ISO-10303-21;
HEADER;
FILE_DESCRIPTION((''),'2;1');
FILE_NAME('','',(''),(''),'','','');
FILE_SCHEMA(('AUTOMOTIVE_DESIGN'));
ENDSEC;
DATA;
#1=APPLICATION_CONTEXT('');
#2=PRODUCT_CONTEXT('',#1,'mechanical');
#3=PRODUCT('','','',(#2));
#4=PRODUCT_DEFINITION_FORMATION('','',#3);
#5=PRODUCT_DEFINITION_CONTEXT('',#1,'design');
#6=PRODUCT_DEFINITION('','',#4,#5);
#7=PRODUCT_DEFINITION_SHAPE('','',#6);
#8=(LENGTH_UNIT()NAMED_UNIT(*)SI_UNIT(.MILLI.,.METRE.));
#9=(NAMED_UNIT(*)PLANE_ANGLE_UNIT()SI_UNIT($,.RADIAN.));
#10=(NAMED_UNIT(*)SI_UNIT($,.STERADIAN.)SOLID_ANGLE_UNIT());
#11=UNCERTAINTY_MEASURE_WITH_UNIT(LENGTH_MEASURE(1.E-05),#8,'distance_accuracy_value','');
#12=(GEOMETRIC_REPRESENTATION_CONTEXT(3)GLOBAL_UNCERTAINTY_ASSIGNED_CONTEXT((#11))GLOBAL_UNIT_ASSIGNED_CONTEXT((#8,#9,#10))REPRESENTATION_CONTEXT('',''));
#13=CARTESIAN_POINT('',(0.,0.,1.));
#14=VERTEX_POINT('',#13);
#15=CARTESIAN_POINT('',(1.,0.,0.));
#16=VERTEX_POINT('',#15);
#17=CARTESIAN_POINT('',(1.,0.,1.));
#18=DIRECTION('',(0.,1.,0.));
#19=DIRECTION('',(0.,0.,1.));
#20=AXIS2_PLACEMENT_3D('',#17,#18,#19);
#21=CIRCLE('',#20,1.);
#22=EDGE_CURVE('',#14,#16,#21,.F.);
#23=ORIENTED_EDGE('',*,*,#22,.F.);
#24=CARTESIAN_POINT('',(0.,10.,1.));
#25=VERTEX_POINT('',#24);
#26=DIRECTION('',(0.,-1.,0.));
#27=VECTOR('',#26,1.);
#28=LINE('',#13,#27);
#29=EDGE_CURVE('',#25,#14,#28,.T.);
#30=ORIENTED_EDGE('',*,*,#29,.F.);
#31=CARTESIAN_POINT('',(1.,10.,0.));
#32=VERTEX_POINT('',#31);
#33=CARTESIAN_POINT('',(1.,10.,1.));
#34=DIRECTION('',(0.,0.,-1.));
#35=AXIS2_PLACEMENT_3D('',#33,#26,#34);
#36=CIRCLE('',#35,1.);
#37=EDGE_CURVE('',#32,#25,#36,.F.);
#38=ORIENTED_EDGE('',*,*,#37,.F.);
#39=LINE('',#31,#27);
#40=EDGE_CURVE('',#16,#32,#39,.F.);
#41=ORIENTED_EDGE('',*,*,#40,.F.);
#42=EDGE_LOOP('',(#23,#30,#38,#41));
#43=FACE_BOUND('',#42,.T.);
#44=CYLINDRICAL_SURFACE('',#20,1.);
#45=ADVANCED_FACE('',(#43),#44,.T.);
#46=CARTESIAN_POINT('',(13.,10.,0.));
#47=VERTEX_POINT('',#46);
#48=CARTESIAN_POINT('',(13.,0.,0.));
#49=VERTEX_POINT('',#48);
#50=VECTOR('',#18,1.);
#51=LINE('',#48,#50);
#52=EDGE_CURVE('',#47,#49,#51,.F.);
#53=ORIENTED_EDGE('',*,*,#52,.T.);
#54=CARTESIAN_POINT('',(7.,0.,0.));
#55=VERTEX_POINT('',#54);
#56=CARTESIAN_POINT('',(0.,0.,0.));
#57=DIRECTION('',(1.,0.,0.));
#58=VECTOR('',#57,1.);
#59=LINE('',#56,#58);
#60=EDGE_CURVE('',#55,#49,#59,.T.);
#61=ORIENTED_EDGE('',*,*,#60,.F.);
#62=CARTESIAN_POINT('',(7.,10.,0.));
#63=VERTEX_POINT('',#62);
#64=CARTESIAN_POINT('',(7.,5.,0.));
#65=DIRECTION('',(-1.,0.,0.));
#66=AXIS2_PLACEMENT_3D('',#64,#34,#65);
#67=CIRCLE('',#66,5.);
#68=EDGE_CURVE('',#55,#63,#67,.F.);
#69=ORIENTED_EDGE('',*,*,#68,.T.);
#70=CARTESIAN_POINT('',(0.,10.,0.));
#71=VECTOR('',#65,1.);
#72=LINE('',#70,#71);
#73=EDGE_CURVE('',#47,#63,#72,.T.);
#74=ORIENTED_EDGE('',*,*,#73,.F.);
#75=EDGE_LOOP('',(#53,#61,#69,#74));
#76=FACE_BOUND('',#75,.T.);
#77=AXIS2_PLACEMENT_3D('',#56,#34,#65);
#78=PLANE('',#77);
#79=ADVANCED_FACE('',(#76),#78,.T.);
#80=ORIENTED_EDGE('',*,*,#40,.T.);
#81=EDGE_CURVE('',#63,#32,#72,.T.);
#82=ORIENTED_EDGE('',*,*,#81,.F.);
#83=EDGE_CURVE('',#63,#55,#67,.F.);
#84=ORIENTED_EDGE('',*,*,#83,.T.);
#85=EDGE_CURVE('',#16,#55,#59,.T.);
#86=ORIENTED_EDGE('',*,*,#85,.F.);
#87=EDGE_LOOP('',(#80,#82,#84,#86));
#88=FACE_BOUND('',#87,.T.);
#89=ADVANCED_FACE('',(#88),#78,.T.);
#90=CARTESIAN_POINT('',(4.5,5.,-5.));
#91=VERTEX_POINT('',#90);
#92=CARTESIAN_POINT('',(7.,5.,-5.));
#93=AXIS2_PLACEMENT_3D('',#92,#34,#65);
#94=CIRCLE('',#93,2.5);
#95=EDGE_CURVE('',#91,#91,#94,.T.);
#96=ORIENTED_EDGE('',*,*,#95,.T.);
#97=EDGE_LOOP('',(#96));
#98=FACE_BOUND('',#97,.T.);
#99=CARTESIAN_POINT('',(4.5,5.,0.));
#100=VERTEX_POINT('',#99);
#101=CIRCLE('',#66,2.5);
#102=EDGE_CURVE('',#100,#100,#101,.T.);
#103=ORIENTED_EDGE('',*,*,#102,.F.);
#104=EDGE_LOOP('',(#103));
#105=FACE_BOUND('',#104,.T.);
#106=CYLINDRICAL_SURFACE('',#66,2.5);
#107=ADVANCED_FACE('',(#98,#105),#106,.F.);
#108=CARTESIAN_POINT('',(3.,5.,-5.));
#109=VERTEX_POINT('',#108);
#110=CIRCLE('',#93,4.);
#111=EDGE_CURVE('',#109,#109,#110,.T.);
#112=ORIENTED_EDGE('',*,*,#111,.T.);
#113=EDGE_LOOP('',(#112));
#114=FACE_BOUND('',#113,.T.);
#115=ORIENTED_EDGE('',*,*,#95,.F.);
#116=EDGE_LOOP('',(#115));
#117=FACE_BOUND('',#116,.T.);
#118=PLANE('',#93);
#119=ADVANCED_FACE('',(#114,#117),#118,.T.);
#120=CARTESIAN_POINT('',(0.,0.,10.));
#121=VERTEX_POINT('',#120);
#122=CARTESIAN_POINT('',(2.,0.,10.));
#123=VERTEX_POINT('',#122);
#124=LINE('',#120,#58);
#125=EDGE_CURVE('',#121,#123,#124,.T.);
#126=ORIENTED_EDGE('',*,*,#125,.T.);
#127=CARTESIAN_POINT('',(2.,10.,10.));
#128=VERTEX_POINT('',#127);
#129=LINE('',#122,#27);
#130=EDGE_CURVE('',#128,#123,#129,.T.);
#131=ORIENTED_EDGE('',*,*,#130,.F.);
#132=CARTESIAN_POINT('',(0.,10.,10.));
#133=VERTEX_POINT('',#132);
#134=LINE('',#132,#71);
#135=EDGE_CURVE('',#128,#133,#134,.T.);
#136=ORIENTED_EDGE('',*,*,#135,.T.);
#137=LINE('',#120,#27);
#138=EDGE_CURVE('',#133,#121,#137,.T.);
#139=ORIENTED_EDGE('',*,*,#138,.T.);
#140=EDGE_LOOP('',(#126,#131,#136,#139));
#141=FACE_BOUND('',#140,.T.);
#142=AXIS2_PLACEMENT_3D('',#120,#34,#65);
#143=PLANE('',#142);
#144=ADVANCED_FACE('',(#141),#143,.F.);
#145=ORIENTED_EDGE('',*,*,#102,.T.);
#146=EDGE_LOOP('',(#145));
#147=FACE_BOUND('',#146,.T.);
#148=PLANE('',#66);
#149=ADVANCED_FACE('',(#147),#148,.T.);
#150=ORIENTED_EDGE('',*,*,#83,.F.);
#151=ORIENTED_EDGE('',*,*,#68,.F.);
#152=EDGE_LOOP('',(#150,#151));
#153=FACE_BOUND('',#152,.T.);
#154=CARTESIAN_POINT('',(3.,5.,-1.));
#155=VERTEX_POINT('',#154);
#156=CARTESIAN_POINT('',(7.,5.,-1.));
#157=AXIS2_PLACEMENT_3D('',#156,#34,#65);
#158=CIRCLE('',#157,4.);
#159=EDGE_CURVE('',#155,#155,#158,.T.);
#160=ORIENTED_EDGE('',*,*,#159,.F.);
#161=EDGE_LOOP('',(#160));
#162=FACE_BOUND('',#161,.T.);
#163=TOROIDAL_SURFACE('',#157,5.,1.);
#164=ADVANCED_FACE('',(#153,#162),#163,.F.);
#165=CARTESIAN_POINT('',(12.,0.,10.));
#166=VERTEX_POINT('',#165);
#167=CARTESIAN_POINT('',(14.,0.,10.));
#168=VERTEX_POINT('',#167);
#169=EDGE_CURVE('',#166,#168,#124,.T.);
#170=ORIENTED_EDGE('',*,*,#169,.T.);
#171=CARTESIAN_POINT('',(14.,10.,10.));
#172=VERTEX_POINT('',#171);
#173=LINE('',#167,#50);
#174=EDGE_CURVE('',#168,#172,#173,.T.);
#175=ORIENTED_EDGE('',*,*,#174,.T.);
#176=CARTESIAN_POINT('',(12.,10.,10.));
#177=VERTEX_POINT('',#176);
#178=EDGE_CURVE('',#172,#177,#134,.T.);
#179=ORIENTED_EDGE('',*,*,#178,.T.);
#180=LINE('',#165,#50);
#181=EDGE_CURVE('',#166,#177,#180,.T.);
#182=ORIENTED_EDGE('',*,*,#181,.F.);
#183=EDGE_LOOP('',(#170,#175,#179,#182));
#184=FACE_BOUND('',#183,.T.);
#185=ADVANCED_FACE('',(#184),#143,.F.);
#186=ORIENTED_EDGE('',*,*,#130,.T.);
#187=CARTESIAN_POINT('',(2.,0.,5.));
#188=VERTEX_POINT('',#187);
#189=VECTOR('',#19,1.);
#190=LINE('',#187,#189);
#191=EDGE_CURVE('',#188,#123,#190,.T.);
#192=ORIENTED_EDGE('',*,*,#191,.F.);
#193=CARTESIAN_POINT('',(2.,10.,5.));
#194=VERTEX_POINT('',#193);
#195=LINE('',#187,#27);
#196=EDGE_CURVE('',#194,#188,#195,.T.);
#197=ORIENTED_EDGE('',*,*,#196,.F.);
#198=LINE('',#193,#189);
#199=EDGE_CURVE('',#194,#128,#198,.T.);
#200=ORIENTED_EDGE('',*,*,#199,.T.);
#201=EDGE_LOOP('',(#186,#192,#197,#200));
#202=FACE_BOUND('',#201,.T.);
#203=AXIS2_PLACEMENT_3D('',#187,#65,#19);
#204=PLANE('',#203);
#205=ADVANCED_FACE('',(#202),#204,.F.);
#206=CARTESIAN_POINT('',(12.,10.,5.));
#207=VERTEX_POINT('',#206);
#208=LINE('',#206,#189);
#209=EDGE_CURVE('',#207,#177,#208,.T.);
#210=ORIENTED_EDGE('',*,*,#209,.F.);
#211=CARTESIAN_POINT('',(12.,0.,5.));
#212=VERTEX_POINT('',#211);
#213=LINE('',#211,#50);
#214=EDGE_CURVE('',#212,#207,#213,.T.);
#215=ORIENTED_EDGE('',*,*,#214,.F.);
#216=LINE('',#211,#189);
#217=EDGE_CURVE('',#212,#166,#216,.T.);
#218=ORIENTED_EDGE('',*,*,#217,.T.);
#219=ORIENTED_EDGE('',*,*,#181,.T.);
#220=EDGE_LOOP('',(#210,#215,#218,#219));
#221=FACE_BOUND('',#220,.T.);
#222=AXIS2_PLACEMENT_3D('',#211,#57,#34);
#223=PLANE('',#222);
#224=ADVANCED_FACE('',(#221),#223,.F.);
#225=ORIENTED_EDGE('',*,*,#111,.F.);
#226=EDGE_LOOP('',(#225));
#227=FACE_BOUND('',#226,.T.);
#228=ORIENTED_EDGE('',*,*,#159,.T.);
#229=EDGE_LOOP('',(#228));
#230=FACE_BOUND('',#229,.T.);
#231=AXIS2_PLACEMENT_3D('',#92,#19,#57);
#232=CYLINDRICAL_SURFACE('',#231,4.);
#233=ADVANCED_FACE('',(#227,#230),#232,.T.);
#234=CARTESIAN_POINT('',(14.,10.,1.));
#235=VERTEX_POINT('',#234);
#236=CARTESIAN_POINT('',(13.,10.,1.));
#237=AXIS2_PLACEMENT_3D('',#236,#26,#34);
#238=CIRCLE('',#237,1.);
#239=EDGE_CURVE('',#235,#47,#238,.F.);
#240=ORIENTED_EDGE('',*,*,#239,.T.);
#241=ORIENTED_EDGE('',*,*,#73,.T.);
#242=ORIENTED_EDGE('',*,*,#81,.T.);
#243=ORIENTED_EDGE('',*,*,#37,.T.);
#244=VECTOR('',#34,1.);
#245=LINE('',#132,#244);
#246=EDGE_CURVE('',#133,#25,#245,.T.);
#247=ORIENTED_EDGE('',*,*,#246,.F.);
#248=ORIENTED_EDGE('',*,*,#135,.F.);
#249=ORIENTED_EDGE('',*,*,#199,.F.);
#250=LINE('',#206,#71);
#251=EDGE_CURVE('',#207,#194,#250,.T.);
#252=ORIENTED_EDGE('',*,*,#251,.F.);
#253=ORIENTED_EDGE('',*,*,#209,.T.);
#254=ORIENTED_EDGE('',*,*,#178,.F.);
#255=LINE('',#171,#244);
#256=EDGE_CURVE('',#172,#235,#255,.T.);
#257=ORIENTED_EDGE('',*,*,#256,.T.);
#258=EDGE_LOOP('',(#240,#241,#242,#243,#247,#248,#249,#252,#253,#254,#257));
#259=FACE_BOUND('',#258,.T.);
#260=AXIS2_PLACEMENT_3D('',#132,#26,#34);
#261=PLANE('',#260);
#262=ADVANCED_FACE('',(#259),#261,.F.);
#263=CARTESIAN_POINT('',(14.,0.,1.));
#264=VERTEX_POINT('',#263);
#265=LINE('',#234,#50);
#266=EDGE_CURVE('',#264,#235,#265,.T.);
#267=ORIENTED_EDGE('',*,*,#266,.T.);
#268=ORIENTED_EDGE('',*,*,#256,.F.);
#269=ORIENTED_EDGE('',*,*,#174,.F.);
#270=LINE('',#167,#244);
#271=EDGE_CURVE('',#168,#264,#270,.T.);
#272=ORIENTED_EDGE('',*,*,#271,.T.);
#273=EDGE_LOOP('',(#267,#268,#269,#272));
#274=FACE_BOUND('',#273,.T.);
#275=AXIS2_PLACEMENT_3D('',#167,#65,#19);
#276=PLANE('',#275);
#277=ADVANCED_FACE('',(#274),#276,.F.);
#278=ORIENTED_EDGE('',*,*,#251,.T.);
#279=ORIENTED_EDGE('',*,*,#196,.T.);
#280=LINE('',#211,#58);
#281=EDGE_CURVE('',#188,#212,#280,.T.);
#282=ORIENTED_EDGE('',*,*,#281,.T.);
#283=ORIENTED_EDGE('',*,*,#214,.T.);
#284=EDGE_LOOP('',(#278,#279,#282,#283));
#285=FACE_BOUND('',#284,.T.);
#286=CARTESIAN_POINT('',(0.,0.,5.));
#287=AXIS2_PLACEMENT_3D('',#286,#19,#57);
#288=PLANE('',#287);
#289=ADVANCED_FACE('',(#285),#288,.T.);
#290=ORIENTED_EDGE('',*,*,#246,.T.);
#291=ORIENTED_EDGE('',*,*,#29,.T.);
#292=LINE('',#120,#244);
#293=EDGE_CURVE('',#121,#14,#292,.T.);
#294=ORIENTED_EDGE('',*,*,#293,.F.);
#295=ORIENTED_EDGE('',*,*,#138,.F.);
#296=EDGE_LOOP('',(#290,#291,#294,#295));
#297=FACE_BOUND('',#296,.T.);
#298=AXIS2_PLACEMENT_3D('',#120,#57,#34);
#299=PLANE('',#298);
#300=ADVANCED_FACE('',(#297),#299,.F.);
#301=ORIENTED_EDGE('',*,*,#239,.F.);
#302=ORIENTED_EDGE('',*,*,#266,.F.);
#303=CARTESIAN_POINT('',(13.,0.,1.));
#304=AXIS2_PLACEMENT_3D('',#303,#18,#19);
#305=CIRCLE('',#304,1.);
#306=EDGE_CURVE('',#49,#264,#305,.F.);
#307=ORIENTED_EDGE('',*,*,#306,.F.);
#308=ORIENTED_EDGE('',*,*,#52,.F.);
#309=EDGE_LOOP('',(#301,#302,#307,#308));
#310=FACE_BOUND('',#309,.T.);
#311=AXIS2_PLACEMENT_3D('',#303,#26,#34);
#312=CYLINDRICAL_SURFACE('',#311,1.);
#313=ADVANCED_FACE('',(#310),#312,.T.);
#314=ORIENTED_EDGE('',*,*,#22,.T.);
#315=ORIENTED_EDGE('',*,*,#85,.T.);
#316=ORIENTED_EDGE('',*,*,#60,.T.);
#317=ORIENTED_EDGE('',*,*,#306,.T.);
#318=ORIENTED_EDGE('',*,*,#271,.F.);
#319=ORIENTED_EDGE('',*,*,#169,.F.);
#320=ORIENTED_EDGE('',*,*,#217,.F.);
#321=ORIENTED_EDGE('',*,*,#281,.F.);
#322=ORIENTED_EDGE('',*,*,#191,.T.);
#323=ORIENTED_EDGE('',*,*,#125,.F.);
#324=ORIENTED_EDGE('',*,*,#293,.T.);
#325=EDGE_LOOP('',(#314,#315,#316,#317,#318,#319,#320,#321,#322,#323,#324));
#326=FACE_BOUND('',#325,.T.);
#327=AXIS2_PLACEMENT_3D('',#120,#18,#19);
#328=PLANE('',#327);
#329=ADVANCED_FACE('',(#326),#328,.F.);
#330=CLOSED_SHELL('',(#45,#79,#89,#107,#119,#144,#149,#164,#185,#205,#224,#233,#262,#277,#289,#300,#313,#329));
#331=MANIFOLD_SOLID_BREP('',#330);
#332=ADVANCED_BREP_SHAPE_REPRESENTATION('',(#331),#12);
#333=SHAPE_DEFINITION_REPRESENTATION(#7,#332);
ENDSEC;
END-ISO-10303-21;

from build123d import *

# Parameters (mm, degrees)
ESQUISSE1_W             = 14
ESQUISSE1_H             = 10
BOSS_EXTRU_1_DEPTH      = 10
ESQUISSE4_R             = 4
BOSS_EXTRU_2_DEPTH      = 5
ESQUISSE5_R             = 2.5
ENL_V_MAT_EXTRU_2_DEPTH = 5
CONG_3_R                = 1
CONG_4_R                = 1
ESQUISSE6_W             = 10
ESQUISSE6_H             = 10
ENL_V_MAT_EXTRU_3_DEPTH = 5


with BuildPart() as part:
    # Esquisse1 → Boss.-Extru.1 (new body)
    with BuildSketch(Plane.XY):
        with Locations((7, 5)):
            Rectangle(ESQUISSE1_W, ESQUISSE1_H)
    extrude(amount=BOSS_EXTRU_1_DEPTH)

    # Esquisse4 → Boss.-Extru.2 (add)
    with BuildSketch(Plane(origin=(0, 0, 0), x_dir=(-1, 0, 0), z_dir=(0, 0, -1))):
        with Locations((-7, 5)):
            Circle(ESQUISSE4_R)
    extrude(amount=BOSS_EXTRU_2_DEPTH)

    # Esquisse5 → Enlèv. mat.-Extru.2 (cut)
    with BuildSketch(Plane(origin=(0, 0, -5), x_dir=(-1, 0, 0), z_dir=(0, 0, -1))):
        with Locations((-7, 5)):
            Circle(ESQUISSE5_R)
    extrude(amount=-ENL_V_MAT_EXTRU_2_DEPTH, mode=Mode.SUBTRACT)

    # Congé3
    cong_3_edges = [part.edges().sort_by_distance(p)[0] for p in [
        (11, 5, 0),
    ]]
    fillet(cong_3_edges, radius=CONG_3_R - 0.0001)  # a hair under: the kernel refuses the full size

    # Congé4
    cong_4_edges = [part.edges().sort_by_distance(p)[0] for p in [
        (14, 5, 0),
        (0, 5, 0),
    ]]
    fillet(cong_4_edges, radius=CONG_4_R)

    # Esquisse6 → Enlèv. mat.-Extru.3 (cut)
    with BuildSketch(Plane.XY.offset(10)):
        with Locations((7, 5)):
            Rectangle(ESQUISSE6_W, ESQUISSE6_H)
    extrude(amount=-ENL_V_MAT_EXTRU_3_DEPTH, mode=Mode.SUBTRACT)


solid = part.part
